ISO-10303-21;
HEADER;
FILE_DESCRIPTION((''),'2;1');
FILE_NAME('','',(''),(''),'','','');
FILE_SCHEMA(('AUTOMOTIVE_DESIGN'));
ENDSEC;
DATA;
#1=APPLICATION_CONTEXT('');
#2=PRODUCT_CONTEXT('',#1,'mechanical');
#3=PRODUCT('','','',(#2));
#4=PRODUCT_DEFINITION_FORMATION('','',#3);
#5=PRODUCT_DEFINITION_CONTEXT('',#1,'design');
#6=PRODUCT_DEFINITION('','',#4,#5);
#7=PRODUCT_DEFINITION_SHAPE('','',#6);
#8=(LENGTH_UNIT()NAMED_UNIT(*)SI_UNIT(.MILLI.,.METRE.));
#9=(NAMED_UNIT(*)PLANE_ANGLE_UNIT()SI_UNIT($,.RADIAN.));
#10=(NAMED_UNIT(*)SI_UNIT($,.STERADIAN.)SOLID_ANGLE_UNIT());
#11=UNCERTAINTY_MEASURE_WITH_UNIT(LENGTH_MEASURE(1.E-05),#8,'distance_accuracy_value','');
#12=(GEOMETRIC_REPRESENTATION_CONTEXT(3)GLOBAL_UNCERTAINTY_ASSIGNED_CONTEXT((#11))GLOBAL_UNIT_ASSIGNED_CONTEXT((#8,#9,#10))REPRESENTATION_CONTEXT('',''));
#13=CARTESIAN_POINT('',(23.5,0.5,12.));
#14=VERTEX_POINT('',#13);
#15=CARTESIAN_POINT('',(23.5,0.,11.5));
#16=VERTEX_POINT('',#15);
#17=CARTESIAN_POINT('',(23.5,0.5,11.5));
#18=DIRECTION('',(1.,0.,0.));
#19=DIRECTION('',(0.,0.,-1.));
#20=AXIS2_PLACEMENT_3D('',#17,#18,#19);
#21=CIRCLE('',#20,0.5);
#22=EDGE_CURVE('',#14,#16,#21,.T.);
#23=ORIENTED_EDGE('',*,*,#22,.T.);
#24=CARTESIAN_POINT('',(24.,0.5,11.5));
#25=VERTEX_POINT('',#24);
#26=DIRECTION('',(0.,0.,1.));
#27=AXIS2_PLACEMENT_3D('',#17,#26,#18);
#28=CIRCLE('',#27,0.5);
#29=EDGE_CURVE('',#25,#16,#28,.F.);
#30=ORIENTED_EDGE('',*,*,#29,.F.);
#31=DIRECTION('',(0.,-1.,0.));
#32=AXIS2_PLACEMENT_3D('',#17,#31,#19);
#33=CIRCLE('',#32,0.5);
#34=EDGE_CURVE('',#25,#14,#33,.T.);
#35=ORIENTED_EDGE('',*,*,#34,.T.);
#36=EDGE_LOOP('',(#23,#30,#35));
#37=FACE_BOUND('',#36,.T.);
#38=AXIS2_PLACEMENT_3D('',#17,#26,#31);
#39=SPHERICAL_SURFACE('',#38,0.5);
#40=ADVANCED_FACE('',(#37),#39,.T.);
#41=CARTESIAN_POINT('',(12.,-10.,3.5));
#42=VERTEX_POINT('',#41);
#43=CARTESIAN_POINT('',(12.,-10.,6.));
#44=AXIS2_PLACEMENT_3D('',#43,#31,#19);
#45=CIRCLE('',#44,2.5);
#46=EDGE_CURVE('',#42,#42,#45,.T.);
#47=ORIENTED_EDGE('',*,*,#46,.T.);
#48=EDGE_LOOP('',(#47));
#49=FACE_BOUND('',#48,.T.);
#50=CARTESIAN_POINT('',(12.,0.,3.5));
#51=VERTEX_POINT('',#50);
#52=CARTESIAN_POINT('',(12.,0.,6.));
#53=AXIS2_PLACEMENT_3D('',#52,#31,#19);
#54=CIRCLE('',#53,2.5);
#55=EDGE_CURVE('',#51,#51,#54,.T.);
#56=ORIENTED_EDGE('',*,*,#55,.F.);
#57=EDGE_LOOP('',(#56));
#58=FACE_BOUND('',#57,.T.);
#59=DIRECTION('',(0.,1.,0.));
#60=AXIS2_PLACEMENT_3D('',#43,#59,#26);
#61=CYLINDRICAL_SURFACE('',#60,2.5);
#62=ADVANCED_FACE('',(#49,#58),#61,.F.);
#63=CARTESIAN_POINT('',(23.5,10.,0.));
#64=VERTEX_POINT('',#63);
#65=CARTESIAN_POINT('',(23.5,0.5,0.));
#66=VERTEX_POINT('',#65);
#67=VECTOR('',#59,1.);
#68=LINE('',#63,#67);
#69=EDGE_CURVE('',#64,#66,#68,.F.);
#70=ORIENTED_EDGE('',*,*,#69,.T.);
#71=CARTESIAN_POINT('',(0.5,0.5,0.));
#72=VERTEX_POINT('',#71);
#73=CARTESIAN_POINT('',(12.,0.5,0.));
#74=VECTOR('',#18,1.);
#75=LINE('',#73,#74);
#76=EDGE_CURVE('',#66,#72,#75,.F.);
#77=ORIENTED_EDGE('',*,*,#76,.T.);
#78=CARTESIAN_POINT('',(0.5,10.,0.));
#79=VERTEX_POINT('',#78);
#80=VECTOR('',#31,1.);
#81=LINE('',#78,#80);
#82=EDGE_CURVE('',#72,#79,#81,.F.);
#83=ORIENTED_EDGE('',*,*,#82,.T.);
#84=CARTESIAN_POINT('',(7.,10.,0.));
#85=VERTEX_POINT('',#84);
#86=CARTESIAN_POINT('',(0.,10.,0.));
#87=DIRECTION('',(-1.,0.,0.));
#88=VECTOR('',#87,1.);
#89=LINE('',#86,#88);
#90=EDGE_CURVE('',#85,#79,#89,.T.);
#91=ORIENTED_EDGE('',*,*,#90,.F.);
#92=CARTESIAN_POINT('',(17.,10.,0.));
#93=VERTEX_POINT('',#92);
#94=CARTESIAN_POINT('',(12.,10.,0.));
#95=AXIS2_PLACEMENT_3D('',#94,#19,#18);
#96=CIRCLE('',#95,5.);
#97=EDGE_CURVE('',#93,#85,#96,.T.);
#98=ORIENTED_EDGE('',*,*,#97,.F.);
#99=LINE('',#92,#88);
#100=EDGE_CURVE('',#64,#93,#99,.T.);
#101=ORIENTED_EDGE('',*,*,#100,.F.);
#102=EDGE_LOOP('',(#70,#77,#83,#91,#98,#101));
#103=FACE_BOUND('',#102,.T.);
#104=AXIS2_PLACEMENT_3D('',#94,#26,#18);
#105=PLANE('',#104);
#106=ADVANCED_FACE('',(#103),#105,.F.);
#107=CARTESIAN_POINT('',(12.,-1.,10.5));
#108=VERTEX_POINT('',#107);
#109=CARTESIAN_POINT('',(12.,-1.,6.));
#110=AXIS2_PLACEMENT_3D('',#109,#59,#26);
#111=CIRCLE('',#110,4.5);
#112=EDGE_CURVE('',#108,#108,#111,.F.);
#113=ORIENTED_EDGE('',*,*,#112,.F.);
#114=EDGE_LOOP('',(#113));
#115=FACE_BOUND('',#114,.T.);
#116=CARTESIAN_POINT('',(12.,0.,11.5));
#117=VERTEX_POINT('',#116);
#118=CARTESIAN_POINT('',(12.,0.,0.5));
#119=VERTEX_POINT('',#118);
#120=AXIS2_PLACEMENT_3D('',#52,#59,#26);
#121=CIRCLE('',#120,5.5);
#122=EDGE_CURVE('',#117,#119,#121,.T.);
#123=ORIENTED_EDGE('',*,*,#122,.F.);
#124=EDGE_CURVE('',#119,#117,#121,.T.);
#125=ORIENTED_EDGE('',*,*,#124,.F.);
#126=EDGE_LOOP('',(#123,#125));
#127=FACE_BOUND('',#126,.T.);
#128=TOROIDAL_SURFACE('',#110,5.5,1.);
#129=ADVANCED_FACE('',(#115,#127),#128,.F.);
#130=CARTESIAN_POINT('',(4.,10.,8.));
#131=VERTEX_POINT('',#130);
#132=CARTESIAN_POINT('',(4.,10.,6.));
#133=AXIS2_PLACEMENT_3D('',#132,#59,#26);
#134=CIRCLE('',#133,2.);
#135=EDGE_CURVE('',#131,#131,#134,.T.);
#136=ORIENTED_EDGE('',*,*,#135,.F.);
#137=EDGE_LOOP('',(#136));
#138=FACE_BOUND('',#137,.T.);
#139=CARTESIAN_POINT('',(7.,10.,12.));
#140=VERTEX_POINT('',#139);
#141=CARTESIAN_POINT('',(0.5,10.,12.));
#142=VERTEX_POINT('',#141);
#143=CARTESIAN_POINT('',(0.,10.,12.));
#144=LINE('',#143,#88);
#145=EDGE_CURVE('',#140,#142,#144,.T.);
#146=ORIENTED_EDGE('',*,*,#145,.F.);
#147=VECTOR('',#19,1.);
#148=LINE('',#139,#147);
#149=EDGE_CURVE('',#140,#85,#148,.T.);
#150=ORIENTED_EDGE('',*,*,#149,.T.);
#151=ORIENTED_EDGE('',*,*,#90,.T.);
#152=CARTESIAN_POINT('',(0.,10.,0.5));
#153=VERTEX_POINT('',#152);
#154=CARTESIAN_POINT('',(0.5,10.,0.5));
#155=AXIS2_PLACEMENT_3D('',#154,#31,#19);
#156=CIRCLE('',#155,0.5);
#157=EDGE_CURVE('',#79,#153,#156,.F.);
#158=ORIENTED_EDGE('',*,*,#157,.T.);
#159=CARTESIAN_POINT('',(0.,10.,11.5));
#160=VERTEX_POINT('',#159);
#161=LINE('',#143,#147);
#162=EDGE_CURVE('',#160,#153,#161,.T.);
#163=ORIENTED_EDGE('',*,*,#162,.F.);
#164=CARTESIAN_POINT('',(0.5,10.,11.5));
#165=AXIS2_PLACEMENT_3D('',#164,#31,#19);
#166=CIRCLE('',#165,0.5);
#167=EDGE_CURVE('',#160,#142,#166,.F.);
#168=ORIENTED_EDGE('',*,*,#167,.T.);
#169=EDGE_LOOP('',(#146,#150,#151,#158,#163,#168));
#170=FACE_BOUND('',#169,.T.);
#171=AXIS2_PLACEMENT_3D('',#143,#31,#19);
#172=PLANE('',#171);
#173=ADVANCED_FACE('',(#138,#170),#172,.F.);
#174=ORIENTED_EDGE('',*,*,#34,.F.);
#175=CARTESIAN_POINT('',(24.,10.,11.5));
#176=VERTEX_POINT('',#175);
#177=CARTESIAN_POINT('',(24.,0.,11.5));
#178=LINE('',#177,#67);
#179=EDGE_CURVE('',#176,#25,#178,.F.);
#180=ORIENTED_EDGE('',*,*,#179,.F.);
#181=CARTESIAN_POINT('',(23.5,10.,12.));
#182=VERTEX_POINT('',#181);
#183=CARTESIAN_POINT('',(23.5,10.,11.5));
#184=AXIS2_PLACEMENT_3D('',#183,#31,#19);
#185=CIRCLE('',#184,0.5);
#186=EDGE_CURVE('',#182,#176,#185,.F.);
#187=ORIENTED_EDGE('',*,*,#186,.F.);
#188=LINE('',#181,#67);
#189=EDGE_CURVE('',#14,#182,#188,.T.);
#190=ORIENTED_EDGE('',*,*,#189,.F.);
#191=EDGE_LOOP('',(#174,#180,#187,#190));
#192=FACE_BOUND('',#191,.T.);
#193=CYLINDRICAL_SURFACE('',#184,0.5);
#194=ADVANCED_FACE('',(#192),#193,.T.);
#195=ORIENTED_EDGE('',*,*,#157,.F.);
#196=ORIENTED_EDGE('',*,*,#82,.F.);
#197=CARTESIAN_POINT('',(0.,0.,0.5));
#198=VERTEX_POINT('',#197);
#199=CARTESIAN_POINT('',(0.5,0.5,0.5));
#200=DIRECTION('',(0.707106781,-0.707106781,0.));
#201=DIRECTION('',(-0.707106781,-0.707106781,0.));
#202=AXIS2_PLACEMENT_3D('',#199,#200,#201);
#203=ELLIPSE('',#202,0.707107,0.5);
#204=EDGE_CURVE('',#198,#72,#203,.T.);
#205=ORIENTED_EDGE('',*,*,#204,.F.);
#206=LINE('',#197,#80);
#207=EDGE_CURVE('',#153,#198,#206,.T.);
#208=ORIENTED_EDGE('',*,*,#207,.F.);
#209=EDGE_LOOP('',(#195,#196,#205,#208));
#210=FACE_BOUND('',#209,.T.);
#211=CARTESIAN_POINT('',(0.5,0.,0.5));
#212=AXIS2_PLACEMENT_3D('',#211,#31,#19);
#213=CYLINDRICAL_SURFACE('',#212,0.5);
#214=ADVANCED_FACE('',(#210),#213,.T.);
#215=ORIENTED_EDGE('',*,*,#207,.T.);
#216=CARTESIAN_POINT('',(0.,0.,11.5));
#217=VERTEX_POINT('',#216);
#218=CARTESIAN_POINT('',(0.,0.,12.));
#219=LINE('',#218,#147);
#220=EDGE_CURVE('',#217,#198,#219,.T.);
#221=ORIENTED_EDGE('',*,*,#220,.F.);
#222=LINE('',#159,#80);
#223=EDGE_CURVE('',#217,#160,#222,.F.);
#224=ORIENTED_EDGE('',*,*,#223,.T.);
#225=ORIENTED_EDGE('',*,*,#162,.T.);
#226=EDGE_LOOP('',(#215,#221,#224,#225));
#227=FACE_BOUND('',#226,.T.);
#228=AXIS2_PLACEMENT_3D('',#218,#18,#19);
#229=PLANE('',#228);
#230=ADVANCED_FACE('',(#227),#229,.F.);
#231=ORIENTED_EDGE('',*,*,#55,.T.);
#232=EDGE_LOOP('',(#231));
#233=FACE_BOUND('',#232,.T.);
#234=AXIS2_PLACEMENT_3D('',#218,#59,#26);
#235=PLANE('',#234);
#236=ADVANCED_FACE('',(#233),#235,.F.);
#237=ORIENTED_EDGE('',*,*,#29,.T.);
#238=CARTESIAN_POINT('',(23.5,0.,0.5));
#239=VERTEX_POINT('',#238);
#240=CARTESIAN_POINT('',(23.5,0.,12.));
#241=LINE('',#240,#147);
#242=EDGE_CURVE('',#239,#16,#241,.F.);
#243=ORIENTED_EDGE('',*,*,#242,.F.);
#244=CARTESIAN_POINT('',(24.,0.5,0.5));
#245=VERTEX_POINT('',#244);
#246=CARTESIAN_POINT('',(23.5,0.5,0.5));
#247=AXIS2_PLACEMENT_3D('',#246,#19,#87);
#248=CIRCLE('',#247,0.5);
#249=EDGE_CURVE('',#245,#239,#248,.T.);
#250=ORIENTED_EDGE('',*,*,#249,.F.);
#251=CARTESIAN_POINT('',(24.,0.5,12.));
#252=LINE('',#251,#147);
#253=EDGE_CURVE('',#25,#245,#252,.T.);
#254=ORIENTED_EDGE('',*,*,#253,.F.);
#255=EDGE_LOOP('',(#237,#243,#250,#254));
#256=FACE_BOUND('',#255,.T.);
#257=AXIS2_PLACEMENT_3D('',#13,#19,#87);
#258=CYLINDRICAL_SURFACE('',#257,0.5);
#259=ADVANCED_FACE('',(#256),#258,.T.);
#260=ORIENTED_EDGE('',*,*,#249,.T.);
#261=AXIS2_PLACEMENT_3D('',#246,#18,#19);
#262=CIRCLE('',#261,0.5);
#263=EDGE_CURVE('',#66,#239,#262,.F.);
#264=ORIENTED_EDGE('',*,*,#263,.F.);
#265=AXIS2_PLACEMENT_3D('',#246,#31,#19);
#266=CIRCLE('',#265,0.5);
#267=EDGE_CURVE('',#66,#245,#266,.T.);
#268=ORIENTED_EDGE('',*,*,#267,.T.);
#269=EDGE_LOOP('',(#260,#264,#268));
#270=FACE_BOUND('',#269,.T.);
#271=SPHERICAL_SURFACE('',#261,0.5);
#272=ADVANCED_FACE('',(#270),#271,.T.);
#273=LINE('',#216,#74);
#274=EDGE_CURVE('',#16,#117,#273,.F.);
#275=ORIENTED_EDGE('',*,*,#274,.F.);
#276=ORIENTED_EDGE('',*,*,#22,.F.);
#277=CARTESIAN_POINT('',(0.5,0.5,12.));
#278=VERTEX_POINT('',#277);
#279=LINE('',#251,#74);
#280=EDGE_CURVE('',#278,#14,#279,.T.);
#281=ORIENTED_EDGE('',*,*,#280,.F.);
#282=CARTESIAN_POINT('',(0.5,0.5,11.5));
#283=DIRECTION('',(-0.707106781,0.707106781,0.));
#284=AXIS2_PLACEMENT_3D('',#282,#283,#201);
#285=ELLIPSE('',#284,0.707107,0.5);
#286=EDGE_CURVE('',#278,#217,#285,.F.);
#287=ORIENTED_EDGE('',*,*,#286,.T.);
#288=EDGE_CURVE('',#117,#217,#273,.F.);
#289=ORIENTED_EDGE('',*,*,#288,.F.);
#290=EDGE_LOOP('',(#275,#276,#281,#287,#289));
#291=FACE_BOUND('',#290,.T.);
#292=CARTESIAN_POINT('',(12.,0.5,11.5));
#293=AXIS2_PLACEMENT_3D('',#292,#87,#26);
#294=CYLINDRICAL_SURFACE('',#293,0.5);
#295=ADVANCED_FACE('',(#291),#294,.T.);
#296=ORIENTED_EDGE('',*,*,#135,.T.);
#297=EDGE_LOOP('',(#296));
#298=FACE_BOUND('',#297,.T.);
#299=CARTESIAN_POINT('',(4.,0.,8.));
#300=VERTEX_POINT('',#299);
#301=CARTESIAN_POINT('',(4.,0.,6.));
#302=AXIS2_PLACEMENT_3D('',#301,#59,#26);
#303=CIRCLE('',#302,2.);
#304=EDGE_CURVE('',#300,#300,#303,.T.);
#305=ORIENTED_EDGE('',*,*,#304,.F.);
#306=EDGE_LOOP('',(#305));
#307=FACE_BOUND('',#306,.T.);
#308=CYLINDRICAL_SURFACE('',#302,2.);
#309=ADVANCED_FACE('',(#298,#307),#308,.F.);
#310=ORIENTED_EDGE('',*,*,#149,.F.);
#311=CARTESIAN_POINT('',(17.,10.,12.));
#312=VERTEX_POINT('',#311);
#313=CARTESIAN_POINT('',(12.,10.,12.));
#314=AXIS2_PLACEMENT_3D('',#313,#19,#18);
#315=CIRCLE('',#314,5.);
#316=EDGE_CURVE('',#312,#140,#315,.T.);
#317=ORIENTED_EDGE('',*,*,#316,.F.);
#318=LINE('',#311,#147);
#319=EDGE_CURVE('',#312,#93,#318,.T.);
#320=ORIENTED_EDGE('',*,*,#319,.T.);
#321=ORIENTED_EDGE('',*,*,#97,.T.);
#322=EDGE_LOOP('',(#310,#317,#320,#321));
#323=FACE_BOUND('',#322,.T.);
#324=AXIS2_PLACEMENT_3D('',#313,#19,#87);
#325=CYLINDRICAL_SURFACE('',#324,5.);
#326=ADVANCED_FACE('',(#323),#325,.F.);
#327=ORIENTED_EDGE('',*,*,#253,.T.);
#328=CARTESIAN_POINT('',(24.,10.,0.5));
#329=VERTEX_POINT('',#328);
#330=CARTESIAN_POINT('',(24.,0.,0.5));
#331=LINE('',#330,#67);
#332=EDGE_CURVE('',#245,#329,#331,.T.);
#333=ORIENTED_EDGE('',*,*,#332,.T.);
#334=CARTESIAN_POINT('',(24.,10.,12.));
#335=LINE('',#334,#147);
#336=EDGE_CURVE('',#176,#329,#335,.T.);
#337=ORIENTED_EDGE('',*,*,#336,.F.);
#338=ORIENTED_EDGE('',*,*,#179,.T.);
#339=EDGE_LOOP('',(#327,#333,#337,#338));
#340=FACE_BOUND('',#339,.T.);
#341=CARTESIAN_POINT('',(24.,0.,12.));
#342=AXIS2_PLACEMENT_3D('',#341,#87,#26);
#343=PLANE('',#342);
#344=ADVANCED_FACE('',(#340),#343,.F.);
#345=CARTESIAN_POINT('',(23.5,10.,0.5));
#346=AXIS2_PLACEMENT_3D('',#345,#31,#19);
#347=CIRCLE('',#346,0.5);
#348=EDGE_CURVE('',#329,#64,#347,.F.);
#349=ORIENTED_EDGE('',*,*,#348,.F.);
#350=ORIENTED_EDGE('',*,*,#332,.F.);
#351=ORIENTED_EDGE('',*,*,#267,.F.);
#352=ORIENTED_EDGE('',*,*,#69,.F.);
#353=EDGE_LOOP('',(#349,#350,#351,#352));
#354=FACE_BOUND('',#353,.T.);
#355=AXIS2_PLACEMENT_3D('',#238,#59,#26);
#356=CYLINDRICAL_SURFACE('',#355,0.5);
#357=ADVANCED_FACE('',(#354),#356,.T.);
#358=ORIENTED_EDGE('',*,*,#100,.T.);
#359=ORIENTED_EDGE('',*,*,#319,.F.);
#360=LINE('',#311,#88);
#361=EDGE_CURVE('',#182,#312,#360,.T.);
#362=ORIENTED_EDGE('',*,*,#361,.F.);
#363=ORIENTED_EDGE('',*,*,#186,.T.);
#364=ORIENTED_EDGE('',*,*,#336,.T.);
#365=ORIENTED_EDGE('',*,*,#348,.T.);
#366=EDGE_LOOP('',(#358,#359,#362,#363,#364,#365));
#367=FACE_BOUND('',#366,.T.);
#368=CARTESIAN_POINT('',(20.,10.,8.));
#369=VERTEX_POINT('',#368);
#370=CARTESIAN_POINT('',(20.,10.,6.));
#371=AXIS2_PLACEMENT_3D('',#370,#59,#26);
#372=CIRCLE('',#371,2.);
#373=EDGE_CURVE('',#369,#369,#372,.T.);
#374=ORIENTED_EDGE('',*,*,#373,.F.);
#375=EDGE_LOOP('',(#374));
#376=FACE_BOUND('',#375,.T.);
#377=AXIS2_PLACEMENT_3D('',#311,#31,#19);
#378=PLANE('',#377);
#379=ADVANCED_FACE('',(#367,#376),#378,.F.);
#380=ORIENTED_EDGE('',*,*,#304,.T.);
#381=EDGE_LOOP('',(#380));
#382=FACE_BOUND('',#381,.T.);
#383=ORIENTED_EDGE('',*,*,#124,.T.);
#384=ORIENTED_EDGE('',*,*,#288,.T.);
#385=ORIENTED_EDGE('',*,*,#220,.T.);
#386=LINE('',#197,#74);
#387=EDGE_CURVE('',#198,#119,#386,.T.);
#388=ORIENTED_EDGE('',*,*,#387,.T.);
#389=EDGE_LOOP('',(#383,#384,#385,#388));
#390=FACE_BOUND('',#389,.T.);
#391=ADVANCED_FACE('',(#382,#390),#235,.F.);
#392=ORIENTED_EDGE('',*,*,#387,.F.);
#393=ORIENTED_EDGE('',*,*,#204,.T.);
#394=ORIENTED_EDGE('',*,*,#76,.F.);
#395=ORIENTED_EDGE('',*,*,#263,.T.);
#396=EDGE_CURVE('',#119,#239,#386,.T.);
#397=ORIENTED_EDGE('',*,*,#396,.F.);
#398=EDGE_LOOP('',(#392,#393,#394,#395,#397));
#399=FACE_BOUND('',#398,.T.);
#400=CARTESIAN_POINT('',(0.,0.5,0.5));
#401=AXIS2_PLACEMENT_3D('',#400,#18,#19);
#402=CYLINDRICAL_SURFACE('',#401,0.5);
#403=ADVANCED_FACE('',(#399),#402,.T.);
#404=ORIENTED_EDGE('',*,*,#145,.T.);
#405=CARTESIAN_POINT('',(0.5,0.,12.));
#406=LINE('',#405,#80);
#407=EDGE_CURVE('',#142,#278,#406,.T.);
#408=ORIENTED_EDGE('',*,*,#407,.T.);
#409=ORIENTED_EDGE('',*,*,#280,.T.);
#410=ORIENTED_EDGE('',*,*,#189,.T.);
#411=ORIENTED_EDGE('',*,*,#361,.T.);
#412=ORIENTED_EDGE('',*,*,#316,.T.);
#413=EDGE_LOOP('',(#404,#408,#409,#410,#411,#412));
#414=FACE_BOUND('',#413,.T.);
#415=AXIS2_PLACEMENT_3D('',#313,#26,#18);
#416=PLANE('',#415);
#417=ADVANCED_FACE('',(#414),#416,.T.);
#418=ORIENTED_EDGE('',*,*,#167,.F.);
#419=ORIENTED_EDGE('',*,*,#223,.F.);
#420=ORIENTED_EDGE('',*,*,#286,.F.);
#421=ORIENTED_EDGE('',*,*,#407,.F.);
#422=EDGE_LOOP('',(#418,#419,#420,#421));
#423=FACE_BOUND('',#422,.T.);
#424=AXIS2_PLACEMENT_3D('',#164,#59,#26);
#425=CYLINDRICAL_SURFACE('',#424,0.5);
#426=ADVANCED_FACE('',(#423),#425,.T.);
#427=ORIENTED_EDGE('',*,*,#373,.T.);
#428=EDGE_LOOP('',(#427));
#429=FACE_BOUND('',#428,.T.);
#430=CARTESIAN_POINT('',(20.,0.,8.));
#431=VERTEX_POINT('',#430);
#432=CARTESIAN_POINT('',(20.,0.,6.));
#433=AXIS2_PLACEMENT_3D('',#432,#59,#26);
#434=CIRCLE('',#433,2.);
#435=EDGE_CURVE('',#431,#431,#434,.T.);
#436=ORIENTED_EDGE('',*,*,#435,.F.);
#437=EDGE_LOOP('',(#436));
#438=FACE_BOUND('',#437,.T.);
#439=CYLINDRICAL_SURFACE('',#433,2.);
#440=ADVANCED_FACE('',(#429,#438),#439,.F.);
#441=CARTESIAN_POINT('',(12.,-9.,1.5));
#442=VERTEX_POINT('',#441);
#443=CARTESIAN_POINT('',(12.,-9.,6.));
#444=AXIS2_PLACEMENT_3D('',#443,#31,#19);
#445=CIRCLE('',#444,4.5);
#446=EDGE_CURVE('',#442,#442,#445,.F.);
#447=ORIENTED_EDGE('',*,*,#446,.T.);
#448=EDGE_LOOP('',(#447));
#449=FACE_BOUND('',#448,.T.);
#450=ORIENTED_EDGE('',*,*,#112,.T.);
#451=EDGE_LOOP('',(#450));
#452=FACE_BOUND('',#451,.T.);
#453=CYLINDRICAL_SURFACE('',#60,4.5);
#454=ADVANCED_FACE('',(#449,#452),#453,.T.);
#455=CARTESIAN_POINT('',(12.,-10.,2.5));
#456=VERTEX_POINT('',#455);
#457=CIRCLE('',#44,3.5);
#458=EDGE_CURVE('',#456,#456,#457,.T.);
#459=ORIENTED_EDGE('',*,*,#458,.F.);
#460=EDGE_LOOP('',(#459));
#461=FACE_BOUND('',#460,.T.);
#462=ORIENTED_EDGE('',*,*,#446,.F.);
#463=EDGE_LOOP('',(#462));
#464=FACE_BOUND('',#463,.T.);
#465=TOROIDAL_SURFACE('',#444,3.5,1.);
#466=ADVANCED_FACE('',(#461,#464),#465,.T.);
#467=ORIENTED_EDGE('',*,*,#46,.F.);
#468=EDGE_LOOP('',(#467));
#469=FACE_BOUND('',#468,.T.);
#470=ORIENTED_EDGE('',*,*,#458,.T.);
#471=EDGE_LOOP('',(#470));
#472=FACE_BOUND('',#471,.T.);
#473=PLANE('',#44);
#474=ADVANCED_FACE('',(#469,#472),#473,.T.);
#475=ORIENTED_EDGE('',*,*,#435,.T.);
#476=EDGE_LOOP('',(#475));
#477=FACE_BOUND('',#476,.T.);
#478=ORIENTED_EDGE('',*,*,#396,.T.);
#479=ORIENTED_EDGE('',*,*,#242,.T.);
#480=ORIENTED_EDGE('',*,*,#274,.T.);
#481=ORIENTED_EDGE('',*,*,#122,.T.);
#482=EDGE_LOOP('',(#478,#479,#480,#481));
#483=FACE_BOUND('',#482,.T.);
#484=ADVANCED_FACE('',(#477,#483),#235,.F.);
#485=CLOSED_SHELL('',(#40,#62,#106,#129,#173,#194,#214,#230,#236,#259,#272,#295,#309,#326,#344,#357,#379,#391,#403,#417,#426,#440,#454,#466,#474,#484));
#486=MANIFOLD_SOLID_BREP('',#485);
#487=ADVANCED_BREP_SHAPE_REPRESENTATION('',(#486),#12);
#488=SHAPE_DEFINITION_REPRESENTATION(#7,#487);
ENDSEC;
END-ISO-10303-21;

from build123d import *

# Parameters (mm, degrees)
BOSS_EXTRUDE1_DEPTH = 12
SKETCH2_R           = 2
CUT_EXTRUDE1_DEPTH  = 29.635642127
SKETCH3_R           = 4.5
SKETCH3_R_2         = 2.5
BOSS_EXTRUDE2_DEPTH = 10
FILLET1_R           = 1
FILLET2_R           = 0.5


with BuildPart() as part:
    # Sketch1 → Boss-Extrude1 (new body)
    with BuildSketch(Plane.XY):
        with BuildLine():
            Line((17, 10), (24, 10))
            Line((24, 10), (24, 0))
            Line((24, 0), (0, 0))
            Line((0, 0), (0, 10))
            Line((0, 10), (7, 10))
            ThreePointArc((7, 10), (12, 5), (17, 10))
        make_face()
    extrude(amount=BOSS_EXTRUDE1_DEPTH)

    # Sketch2 → Cut-Extrude1 (cut, through all)
    with BuildSketch(Plane(origin=(0, 10, 0), x_dir=(1, 0, 0), z_dir=(0, 1, 0))):
        with Locations(Location((4, -6, 0), (0, 0, 270))):
            Circle(SKETCH2_R)
        with Locations(Location((20, -6, 0), (0, 0, 270))):
            Circle(SKETCH2_R)
    extrude(amount=-CUT_EXTRUDE1_DEPTH, mode=Mode.SUBTRACT)

    # Sketch3 → Boss-Extrude2 (add)
    with BuildSketch(Plane.XZ):
        with Locations(Location((12, 6, 0), (0, 0, 90))):
            Circle(SKETCH3_R)
        with Locations(Location((12, 6, 0), (0, 0, 270))):
            Circle(SKETCH3_R_2, mode=Mode.SUBTRACT)
    extrude(amount=BOSS_EXTRUDE2_DEPTH)

    # Fillet1
    fillet1_edges = [part.edges().sort_by_distance(p)[0] for p in [
        (12, 0, 1.5),
        (12, -10, 1.5),
    ]]
    fillet(fillet1_edges, radius=FILLET1_R)

    # Fillet2
    fillet2_edges = [part.edges().sort_by_distance(p)[0] for p in [
        (24, 0, 6),
        (24, 5, 12),
        (0, 5, 12),
        (24, 5, 0),
        (12, 0, 0),
        (0, 5, 0),
        (12, 0, 12),
    ]]
    fillet(fillet2_edges, radius=FILLET2_R - 0.0001)  # a hair under: the kernel refuses the full size


solid = part.part
